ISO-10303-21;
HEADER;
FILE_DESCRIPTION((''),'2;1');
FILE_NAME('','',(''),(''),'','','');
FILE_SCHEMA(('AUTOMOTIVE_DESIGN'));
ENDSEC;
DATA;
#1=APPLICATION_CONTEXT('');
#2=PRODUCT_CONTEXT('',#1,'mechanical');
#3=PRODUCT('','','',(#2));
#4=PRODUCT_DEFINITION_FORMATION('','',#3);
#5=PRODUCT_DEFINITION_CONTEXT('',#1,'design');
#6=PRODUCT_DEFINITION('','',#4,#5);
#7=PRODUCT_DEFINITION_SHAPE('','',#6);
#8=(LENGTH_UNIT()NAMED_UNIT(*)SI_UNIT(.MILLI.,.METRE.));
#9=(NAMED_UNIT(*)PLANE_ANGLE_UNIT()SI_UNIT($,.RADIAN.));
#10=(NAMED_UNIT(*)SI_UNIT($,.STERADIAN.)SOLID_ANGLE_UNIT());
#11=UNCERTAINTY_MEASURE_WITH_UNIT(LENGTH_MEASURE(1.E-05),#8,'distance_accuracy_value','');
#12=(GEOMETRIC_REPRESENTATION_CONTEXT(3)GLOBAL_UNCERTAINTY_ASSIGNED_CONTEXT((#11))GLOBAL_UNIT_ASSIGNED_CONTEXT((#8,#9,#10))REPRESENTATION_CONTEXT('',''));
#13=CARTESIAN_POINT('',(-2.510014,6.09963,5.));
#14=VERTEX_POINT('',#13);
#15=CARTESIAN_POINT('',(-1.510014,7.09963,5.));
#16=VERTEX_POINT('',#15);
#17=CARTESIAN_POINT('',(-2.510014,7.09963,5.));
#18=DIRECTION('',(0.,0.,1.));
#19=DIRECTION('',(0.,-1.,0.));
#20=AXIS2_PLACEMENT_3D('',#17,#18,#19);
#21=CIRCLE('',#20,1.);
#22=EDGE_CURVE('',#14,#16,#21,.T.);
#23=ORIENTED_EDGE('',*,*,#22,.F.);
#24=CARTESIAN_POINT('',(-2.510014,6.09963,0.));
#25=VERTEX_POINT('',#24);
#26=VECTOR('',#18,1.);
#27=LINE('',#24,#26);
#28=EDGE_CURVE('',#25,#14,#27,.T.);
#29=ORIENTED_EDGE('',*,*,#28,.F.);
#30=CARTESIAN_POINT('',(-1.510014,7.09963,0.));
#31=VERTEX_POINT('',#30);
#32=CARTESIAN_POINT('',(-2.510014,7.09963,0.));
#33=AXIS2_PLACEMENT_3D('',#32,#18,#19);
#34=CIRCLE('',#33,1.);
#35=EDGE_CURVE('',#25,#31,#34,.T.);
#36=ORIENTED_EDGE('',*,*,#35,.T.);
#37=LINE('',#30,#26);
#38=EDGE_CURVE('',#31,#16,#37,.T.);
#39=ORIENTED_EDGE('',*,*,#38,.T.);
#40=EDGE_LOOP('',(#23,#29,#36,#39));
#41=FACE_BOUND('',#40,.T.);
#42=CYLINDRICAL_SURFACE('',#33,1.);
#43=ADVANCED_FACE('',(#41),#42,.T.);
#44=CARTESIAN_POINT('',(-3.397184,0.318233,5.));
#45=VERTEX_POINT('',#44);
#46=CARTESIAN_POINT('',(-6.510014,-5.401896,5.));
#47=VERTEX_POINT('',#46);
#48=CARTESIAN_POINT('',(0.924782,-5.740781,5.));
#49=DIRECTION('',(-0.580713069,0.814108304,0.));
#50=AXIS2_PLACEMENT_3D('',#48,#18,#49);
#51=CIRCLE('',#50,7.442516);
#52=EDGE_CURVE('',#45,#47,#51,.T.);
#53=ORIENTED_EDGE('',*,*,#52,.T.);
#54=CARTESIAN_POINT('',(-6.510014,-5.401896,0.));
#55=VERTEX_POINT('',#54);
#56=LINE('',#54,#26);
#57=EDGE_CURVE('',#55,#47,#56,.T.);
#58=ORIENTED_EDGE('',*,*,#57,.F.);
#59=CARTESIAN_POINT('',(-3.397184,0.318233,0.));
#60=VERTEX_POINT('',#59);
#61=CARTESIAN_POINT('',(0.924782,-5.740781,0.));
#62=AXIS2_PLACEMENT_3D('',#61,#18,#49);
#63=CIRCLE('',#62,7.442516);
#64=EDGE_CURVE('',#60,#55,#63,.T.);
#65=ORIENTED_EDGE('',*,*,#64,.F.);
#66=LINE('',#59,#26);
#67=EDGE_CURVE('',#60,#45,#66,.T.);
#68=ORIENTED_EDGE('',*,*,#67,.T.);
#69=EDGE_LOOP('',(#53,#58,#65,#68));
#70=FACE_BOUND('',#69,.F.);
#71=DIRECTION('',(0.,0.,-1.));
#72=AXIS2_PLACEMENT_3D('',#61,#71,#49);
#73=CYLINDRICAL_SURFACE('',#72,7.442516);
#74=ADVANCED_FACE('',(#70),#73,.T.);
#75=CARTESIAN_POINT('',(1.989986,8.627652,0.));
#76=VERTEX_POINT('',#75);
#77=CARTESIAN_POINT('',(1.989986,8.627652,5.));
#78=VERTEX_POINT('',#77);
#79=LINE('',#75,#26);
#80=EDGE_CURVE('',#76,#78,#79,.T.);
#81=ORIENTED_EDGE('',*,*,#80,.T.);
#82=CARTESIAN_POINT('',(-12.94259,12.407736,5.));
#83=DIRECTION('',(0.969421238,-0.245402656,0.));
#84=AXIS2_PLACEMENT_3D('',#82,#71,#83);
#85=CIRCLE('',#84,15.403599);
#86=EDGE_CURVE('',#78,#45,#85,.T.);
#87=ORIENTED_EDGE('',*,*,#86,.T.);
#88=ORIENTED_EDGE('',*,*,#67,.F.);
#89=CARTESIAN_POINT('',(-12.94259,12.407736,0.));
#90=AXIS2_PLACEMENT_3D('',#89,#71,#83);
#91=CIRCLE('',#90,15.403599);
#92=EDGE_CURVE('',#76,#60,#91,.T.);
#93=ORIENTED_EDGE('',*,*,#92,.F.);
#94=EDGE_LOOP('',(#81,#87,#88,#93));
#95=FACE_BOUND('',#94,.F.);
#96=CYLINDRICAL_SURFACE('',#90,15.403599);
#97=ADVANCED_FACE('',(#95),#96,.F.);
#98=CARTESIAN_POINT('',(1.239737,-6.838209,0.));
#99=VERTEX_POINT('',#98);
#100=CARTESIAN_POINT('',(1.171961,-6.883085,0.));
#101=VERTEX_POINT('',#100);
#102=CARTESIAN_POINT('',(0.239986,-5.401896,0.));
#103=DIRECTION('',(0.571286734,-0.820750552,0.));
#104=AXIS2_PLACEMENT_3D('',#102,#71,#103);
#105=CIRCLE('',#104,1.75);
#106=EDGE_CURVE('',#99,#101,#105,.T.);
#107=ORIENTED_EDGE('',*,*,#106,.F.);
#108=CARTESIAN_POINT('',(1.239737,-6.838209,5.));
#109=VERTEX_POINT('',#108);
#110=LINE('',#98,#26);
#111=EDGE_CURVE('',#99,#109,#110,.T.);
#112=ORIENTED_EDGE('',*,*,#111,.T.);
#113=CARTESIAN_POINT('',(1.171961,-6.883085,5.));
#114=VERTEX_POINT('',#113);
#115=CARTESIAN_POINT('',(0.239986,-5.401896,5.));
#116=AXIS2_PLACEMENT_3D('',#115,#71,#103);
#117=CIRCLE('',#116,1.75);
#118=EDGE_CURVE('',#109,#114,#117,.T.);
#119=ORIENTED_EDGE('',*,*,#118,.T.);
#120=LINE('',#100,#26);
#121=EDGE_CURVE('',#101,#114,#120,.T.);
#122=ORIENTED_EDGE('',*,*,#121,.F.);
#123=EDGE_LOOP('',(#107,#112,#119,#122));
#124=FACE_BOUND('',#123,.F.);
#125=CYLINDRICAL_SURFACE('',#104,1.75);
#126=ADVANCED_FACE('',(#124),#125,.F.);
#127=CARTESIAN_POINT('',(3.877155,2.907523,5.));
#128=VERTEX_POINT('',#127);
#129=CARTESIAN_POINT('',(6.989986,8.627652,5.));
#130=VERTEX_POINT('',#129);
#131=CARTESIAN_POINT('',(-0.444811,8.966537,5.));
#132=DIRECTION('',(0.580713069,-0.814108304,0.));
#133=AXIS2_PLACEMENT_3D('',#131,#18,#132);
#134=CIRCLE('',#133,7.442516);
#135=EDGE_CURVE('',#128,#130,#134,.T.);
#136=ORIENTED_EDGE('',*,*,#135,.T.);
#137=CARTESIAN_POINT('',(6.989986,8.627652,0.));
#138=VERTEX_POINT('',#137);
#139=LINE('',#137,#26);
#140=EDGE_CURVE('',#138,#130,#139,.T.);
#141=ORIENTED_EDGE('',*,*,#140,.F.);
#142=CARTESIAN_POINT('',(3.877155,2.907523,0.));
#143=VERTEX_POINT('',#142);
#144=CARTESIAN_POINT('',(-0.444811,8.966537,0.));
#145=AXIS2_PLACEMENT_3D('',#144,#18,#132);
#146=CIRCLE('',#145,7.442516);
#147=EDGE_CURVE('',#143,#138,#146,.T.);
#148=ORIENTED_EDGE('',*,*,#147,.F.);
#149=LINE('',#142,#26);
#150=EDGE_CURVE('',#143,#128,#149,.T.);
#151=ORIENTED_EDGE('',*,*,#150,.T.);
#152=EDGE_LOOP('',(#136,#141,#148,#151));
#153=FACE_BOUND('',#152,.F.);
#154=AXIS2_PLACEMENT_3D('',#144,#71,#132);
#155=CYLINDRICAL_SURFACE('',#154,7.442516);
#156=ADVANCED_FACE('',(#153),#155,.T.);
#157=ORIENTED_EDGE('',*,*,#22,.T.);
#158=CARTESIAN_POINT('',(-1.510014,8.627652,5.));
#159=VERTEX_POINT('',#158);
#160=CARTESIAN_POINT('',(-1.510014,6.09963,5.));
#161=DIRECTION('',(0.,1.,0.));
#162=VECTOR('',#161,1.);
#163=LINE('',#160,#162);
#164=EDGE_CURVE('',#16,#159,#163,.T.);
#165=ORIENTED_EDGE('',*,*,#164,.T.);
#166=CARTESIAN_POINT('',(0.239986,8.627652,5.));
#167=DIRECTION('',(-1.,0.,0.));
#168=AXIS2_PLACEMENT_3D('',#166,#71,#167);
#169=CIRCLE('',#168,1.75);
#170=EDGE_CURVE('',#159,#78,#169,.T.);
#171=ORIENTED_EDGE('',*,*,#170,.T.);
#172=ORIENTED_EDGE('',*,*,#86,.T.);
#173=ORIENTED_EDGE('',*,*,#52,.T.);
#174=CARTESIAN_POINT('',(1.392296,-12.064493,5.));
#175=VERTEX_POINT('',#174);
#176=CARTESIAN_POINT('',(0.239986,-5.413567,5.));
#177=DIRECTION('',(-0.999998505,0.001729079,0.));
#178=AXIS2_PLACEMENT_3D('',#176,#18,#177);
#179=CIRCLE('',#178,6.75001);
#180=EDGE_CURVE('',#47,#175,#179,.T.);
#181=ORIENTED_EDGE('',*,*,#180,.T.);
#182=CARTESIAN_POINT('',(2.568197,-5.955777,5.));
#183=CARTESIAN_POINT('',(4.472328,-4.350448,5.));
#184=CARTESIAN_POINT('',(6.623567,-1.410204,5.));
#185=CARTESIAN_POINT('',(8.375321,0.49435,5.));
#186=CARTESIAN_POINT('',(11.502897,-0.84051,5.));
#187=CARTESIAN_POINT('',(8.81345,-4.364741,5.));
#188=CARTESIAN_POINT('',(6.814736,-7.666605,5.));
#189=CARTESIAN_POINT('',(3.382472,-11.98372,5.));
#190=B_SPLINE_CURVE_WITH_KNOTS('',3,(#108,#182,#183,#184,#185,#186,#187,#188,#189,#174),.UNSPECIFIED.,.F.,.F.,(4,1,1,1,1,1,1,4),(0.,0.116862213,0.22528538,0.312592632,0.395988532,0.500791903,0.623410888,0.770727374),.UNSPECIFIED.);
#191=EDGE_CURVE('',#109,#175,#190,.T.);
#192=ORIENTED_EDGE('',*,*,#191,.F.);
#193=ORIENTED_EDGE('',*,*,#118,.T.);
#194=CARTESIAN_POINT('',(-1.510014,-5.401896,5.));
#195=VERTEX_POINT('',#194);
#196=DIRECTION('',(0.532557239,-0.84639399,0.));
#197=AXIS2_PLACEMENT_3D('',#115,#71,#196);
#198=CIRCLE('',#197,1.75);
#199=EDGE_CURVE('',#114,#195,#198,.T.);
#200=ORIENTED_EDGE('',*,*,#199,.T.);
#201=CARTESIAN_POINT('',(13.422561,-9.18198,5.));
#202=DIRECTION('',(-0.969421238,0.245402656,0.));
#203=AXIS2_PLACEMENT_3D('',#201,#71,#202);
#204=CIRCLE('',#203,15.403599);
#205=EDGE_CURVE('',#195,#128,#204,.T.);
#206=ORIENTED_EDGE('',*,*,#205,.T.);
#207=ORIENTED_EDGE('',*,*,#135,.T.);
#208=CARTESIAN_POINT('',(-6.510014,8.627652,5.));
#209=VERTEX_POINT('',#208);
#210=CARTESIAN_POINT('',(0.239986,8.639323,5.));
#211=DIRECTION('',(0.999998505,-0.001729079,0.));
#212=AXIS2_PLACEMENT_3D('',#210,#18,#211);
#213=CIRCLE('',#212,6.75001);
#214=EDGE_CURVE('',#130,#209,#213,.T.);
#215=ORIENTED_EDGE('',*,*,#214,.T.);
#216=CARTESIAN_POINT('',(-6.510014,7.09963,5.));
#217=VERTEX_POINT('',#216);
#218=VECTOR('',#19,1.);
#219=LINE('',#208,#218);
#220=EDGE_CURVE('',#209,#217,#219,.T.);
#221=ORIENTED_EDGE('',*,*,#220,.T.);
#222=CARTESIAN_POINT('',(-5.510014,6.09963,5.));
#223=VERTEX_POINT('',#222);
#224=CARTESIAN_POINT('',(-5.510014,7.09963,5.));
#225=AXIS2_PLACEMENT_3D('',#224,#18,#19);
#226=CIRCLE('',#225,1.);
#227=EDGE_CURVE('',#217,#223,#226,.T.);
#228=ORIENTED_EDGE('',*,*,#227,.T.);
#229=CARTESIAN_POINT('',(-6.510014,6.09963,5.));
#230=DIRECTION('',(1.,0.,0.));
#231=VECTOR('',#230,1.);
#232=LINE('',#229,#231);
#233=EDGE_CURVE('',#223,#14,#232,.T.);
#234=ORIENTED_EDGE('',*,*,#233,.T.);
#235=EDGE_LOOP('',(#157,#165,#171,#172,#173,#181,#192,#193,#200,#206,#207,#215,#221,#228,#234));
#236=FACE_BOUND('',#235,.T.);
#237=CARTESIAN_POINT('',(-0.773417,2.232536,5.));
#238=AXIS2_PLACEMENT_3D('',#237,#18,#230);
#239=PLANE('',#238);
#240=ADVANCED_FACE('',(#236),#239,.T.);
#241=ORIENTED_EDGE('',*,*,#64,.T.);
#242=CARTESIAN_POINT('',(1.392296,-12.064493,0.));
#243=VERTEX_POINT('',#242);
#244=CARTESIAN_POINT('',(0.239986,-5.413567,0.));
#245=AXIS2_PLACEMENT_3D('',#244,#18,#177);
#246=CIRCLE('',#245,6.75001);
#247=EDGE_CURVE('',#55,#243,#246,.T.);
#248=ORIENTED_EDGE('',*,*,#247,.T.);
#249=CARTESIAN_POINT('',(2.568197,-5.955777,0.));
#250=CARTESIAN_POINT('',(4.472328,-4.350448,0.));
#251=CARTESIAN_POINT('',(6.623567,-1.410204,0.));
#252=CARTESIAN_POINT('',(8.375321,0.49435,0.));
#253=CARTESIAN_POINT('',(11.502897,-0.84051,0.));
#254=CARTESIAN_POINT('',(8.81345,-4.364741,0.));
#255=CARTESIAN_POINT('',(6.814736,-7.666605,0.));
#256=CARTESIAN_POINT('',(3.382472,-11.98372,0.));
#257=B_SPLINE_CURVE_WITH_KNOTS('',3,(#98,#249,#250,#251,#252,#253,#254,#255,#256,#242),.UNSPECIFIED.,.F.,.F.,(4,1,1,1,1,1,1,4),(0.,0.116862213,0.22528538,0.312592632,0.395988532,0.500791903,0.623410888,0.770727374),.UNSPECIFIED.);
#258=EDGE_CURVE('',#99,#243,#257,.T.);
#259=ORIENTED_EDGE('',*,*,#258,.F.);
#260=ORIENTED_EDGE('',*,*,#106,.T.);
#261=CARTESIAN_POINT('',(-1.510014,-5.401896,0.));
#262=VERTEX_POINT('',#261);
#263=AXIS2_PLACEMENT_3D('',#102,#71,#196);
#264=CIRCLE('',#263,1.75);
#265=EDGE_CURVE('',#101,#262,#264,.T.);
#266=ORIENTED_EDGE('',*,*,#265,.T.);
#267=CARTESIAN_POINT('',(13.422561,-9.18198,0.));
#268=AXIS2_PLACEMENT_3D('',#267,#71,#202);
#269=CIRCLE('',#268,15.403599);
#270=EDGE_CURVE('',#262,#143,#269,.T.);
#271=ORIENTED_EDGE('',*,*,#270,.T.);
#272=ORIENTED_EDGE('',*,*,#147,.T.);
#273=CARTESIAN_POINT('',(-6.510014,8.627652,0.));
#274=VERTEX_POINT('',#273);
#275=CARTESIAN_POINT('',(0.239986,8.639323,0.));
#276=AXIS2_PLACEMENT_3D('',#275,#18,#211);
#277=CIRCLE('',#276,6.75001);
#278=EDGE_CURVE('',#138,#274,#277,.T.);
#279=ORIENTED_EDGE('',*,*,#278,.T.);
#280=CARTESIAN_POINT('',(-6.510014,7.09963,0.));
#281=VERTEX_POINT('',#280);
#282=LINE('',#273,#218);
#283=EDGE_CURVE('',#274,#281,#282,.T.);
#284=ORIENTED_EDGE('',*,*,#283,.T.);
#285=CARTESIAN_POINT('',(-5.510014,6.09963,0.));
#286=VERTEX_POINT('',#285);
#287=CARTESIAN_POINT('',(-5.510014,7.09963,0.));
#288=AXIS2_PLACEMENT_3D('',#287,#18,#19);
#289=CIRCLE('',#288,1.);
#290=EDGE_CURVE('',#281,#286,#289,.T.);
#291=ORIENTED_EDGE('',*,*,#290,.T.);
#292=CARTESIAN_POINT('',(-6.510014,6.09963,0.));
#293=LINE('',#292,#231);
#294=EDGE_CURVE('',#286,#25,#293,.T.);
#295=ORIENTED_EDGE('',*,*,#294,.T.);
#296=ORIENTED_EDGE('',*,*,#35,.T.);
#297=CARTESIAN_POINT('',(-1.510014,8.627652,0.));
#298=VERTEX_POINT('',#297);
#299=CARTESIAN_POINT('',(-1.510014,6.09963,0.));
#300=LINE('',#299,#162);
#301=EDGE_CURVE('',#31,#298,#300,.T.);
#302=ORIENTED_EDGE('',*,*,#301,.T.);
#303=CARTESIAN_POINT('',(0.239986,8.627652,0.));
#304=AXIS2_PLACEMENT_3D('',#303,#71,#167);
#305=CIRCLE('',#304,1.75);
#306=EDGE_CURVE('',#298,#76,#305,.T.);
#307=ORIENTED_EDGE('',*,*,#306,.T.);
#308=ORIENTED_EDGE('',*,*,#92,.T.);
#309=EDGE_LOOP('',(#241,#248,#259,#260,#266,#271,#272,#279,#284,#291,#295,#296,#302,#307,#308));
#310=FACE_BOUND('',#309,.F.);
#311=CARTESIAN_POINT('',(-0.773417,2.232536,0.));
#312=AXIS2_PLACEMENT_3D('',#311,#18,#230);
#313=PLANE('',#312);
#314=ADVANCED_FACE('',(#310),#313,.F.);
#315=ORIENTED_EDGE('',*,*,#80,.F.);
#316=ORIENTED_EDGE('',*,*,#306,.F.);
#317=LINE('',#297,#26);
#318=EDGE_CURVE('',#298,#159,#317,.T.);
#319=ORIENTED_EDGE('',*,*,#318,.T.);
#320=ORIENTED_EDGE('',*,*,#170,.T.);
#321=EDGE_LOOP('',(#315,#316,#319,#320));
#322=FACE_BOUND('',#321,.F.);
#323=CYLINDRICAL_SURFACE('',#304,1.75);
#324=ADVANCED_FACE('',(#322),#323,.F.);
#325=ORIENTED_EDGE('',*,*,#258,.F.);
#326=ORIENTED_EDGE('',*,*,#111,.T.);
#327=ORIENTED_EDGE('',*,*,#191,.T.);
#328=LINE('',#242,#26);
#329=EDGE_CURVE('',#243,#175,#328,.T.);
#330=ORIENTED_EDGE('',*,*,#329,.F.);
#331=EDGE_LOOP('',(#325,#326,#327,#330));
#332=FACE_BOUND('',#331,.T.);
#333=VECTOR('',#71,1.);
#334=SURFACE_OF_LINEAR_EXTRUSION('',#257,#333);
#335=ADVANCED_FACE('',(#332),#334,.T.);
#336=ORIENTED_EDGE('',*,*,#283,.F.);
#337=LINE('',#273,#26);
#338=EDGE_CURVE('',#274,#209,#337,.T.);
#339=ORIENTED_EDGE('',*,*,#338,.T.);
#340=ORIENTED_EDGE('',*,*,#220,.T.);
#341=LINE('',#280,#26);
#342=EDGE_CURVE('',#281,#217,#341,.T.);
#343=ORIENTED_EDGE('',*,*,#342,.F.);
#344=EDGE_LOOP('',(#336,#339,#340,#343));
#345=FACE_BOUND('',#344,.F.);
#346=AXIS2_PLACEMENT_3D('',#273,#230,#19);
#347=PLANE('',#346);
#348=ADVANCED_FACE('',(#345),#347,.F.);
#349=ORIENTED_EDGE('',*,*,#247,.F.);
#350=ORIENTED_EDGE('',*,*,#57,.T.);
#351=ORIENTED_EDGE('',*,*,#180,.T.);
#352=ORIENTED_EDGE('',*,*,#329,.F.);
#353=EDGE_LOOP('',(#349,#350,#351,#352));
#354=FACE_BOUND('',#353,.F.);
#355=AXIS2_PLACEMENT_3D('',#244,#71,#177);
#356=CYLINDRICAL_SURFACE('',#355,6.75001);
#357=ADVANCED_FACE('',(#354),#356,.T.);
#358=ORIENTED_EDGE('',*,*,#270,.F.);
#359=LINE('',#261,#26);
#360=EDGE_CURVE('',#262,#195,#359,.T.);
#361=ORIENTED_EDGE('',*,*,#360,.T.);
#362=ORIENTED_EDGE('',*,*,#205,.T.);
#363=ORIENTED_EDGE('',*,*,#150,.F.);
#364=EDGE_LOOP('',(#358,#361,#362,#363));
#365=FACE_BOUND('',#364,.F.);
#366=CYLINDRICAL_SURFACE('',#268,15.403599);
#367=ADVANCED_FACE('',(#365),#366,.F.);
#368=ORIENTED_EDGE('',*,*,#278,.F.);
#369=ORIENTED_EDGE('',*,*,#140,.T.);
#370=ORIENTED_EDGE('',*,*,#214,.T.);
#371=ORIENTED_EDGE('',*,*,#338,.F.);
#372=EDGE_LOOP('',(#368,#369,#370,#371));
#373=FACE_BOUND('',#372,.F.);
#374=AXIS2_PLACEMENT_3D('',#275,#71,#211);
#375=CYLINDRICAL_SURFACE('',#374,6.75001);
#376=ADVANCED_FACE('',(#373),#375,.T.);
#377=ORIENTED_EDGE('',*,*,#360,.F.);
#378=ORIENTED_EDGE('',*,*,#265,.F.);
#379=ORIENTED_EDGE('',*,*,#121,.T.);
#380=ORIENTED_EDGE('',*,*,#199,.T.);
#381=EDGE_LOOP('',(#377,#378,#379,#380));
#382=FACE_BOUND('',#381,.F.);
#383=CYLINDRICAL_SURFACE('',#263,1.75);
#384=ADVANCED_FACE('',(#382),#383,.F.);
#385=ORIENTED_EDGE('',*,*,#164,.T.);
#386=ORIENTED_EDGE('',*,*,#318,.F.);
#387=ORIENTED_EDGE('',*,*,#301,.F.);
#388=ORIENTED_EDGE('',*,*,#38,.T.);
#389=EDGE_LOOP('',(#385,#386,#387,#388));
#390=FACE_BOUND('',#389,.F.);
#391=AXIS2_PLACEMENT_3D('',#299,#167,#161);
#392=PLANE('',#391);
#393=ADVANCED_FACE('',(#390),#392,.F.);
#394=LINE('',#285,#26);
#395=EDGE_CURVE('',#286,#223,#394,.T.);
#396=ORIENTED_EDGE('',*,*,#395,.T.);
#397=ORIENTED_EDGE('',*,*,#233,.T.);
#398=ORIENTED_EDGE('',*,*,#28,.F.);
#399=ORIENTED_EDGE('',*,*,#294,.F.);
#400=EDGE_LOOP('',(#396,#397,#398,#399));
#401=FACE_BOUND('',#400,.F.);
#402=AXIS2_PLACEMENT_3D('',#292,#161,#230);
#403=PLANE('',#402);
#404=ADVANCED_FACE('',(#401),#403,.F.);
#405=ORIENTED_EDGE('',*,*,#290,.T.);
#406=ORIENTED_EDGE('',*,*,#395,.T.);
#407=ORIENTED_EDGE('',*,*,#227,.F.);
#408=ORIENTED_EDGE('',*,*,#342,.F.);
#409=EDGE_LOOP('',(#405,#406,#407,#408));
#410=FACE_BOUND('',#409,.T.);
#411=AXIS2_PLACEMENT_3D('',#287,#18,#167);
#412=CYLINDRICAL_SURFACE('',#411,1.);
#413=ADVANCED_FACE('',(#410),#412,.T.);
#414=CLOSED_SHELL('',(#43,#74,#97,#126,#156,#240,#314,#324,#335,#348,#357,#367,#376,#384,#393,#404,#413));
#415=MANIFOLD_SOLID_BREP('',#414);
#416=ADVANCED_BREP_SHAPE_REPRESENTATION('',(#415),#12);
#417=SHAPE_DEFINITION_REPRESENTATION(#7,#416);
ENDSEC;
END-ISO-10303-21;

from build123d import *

# Parameters (mm, degrees)
F1_DEPTH = 5
F2_R     = 1


with BuildPart() as f1:
    # F0 (on Top) → F1 (new body)
    with BuildSketch(Plane.XY):
        with BuildLine():
            ThreePointArc((3.8771553396, 2.9075231471), (6.0924160212, 5.4090511435), (6.9899855634, 8.6276519452))
            ThreePointArc((6.9899855634, 8.6276519452), (0.2399855634, 15.3893333343), (-6.5100144366, 8.6276519452))
            Line((-6.5100144366, 8.6276519452), (-6.5100144366, 6.0996299018))
            Line((-6.5100144366, 6.0996299018), (-1.5100144366, 6.0996299018))
            Line((-1.5100144366, 6.0996299018), (-1.5100144366, 8.6276519452))
            ThreePointArc((-1.5100144366, 8.6276519452), (0.2399855634, 10.3776519452), (1.9899855634, 8.6276519452))
            ThreePointArc((1.9899855634, 8.6276519452), (-0.0176334179, 4.0282165309), (-3.3971842127, 0.3182331711))
            ThreePointArc((-3.3971842127, 0.3182331711), (-5.6124448943, -2.1832948252), (-6.5100144366, -5.4018956269))
            ThreePointArc((-6.5100144366, -5.4018956269), (-4.1110010202, -10.5741436346), (1.3922955876, -12.0644930136))
            add(Edge.make_bspline(
                [(1.3922955876, -12.0644930136), (-0.1266799353, -12.1261417215), (-3.3351189393, -9.5714125443), (-0.1444645506, -7.7520643513), (1.1719607323, -6.8830851099)],
                knots=[0.7707273739, 0.7707273739, 0.7707273739, 0.7707273739, 0.8831647339, 0.9980209114, 0.9980209114, 0.9980209114, 0.9980209114], degree=3))
            ThreePointArc((1.1719607323, -6.8830851099), (-0.6060473716, -6.9337991072), (-1.5100144366, -5.4018956269))
            ThreePointArc((-1.5100144366, -5.4018956269), (0.4976045447, -0.8024602126), (3.8771553396, 2.9075231471))
        make_face()
        with BuildLine():
            ThreePointArc((1.2397373462, -6.838209093), (1.2061096332, -6.8610406786), (1.1719607323, -6.8830851099))
            add(Edge.make_bspline(
                [(1.3922955876, -12.0644930136), (-0.1266799353, -12.1261417215), (-3.3351189393, -9.5714125443), (-0.1444645506, -7.7520643513), (1.1719607323, -6.8830851099)],
                knots=[0.7707273739, 0.7707273739, 0.7707273739, 0.7707273739, 0.8831647339, 0.9980209114, 0.9980209114, 0.9980209114, 0.9980209114], degree=3))
            add(Edge.make_bspline(
                [(1.2397373462, -6.838209093), (2.5681971331, -5.9557774363), (4.4723284438, -4.3504476654), (6.6235674258, -1.4102036415), (8.3753207128, 0.4943501627), (11.5028973428, -0.8405099917), (8.8134499394, -4.3647410583), (6.8147363685, -7.6666050922), (3.3824715958, -11.9837202971), (1.3922955876, -12.0644930136)],
                knots=[0, 0, 0, 0, 0.1168622127, 0.2252853805, 0.3125926323, 0.3959885324, 0.5007919029, 0.623410888, 0.7707273739, 0.7707273739, 0.7707273739, 0.7707273739], degree=3))
        make_face()
    extrude(amount=F1_DEPTH)

    # F2
    f2_edges = [f1.edges().sort_by_distance(p)[0] for p in [
        (-1.510014, 6.09963, 2.5),
        (-6.510014, 6.09963, 2.5),
    ]]
    fillet(f2_edges, radius=F2_R)


solid = f1.part
